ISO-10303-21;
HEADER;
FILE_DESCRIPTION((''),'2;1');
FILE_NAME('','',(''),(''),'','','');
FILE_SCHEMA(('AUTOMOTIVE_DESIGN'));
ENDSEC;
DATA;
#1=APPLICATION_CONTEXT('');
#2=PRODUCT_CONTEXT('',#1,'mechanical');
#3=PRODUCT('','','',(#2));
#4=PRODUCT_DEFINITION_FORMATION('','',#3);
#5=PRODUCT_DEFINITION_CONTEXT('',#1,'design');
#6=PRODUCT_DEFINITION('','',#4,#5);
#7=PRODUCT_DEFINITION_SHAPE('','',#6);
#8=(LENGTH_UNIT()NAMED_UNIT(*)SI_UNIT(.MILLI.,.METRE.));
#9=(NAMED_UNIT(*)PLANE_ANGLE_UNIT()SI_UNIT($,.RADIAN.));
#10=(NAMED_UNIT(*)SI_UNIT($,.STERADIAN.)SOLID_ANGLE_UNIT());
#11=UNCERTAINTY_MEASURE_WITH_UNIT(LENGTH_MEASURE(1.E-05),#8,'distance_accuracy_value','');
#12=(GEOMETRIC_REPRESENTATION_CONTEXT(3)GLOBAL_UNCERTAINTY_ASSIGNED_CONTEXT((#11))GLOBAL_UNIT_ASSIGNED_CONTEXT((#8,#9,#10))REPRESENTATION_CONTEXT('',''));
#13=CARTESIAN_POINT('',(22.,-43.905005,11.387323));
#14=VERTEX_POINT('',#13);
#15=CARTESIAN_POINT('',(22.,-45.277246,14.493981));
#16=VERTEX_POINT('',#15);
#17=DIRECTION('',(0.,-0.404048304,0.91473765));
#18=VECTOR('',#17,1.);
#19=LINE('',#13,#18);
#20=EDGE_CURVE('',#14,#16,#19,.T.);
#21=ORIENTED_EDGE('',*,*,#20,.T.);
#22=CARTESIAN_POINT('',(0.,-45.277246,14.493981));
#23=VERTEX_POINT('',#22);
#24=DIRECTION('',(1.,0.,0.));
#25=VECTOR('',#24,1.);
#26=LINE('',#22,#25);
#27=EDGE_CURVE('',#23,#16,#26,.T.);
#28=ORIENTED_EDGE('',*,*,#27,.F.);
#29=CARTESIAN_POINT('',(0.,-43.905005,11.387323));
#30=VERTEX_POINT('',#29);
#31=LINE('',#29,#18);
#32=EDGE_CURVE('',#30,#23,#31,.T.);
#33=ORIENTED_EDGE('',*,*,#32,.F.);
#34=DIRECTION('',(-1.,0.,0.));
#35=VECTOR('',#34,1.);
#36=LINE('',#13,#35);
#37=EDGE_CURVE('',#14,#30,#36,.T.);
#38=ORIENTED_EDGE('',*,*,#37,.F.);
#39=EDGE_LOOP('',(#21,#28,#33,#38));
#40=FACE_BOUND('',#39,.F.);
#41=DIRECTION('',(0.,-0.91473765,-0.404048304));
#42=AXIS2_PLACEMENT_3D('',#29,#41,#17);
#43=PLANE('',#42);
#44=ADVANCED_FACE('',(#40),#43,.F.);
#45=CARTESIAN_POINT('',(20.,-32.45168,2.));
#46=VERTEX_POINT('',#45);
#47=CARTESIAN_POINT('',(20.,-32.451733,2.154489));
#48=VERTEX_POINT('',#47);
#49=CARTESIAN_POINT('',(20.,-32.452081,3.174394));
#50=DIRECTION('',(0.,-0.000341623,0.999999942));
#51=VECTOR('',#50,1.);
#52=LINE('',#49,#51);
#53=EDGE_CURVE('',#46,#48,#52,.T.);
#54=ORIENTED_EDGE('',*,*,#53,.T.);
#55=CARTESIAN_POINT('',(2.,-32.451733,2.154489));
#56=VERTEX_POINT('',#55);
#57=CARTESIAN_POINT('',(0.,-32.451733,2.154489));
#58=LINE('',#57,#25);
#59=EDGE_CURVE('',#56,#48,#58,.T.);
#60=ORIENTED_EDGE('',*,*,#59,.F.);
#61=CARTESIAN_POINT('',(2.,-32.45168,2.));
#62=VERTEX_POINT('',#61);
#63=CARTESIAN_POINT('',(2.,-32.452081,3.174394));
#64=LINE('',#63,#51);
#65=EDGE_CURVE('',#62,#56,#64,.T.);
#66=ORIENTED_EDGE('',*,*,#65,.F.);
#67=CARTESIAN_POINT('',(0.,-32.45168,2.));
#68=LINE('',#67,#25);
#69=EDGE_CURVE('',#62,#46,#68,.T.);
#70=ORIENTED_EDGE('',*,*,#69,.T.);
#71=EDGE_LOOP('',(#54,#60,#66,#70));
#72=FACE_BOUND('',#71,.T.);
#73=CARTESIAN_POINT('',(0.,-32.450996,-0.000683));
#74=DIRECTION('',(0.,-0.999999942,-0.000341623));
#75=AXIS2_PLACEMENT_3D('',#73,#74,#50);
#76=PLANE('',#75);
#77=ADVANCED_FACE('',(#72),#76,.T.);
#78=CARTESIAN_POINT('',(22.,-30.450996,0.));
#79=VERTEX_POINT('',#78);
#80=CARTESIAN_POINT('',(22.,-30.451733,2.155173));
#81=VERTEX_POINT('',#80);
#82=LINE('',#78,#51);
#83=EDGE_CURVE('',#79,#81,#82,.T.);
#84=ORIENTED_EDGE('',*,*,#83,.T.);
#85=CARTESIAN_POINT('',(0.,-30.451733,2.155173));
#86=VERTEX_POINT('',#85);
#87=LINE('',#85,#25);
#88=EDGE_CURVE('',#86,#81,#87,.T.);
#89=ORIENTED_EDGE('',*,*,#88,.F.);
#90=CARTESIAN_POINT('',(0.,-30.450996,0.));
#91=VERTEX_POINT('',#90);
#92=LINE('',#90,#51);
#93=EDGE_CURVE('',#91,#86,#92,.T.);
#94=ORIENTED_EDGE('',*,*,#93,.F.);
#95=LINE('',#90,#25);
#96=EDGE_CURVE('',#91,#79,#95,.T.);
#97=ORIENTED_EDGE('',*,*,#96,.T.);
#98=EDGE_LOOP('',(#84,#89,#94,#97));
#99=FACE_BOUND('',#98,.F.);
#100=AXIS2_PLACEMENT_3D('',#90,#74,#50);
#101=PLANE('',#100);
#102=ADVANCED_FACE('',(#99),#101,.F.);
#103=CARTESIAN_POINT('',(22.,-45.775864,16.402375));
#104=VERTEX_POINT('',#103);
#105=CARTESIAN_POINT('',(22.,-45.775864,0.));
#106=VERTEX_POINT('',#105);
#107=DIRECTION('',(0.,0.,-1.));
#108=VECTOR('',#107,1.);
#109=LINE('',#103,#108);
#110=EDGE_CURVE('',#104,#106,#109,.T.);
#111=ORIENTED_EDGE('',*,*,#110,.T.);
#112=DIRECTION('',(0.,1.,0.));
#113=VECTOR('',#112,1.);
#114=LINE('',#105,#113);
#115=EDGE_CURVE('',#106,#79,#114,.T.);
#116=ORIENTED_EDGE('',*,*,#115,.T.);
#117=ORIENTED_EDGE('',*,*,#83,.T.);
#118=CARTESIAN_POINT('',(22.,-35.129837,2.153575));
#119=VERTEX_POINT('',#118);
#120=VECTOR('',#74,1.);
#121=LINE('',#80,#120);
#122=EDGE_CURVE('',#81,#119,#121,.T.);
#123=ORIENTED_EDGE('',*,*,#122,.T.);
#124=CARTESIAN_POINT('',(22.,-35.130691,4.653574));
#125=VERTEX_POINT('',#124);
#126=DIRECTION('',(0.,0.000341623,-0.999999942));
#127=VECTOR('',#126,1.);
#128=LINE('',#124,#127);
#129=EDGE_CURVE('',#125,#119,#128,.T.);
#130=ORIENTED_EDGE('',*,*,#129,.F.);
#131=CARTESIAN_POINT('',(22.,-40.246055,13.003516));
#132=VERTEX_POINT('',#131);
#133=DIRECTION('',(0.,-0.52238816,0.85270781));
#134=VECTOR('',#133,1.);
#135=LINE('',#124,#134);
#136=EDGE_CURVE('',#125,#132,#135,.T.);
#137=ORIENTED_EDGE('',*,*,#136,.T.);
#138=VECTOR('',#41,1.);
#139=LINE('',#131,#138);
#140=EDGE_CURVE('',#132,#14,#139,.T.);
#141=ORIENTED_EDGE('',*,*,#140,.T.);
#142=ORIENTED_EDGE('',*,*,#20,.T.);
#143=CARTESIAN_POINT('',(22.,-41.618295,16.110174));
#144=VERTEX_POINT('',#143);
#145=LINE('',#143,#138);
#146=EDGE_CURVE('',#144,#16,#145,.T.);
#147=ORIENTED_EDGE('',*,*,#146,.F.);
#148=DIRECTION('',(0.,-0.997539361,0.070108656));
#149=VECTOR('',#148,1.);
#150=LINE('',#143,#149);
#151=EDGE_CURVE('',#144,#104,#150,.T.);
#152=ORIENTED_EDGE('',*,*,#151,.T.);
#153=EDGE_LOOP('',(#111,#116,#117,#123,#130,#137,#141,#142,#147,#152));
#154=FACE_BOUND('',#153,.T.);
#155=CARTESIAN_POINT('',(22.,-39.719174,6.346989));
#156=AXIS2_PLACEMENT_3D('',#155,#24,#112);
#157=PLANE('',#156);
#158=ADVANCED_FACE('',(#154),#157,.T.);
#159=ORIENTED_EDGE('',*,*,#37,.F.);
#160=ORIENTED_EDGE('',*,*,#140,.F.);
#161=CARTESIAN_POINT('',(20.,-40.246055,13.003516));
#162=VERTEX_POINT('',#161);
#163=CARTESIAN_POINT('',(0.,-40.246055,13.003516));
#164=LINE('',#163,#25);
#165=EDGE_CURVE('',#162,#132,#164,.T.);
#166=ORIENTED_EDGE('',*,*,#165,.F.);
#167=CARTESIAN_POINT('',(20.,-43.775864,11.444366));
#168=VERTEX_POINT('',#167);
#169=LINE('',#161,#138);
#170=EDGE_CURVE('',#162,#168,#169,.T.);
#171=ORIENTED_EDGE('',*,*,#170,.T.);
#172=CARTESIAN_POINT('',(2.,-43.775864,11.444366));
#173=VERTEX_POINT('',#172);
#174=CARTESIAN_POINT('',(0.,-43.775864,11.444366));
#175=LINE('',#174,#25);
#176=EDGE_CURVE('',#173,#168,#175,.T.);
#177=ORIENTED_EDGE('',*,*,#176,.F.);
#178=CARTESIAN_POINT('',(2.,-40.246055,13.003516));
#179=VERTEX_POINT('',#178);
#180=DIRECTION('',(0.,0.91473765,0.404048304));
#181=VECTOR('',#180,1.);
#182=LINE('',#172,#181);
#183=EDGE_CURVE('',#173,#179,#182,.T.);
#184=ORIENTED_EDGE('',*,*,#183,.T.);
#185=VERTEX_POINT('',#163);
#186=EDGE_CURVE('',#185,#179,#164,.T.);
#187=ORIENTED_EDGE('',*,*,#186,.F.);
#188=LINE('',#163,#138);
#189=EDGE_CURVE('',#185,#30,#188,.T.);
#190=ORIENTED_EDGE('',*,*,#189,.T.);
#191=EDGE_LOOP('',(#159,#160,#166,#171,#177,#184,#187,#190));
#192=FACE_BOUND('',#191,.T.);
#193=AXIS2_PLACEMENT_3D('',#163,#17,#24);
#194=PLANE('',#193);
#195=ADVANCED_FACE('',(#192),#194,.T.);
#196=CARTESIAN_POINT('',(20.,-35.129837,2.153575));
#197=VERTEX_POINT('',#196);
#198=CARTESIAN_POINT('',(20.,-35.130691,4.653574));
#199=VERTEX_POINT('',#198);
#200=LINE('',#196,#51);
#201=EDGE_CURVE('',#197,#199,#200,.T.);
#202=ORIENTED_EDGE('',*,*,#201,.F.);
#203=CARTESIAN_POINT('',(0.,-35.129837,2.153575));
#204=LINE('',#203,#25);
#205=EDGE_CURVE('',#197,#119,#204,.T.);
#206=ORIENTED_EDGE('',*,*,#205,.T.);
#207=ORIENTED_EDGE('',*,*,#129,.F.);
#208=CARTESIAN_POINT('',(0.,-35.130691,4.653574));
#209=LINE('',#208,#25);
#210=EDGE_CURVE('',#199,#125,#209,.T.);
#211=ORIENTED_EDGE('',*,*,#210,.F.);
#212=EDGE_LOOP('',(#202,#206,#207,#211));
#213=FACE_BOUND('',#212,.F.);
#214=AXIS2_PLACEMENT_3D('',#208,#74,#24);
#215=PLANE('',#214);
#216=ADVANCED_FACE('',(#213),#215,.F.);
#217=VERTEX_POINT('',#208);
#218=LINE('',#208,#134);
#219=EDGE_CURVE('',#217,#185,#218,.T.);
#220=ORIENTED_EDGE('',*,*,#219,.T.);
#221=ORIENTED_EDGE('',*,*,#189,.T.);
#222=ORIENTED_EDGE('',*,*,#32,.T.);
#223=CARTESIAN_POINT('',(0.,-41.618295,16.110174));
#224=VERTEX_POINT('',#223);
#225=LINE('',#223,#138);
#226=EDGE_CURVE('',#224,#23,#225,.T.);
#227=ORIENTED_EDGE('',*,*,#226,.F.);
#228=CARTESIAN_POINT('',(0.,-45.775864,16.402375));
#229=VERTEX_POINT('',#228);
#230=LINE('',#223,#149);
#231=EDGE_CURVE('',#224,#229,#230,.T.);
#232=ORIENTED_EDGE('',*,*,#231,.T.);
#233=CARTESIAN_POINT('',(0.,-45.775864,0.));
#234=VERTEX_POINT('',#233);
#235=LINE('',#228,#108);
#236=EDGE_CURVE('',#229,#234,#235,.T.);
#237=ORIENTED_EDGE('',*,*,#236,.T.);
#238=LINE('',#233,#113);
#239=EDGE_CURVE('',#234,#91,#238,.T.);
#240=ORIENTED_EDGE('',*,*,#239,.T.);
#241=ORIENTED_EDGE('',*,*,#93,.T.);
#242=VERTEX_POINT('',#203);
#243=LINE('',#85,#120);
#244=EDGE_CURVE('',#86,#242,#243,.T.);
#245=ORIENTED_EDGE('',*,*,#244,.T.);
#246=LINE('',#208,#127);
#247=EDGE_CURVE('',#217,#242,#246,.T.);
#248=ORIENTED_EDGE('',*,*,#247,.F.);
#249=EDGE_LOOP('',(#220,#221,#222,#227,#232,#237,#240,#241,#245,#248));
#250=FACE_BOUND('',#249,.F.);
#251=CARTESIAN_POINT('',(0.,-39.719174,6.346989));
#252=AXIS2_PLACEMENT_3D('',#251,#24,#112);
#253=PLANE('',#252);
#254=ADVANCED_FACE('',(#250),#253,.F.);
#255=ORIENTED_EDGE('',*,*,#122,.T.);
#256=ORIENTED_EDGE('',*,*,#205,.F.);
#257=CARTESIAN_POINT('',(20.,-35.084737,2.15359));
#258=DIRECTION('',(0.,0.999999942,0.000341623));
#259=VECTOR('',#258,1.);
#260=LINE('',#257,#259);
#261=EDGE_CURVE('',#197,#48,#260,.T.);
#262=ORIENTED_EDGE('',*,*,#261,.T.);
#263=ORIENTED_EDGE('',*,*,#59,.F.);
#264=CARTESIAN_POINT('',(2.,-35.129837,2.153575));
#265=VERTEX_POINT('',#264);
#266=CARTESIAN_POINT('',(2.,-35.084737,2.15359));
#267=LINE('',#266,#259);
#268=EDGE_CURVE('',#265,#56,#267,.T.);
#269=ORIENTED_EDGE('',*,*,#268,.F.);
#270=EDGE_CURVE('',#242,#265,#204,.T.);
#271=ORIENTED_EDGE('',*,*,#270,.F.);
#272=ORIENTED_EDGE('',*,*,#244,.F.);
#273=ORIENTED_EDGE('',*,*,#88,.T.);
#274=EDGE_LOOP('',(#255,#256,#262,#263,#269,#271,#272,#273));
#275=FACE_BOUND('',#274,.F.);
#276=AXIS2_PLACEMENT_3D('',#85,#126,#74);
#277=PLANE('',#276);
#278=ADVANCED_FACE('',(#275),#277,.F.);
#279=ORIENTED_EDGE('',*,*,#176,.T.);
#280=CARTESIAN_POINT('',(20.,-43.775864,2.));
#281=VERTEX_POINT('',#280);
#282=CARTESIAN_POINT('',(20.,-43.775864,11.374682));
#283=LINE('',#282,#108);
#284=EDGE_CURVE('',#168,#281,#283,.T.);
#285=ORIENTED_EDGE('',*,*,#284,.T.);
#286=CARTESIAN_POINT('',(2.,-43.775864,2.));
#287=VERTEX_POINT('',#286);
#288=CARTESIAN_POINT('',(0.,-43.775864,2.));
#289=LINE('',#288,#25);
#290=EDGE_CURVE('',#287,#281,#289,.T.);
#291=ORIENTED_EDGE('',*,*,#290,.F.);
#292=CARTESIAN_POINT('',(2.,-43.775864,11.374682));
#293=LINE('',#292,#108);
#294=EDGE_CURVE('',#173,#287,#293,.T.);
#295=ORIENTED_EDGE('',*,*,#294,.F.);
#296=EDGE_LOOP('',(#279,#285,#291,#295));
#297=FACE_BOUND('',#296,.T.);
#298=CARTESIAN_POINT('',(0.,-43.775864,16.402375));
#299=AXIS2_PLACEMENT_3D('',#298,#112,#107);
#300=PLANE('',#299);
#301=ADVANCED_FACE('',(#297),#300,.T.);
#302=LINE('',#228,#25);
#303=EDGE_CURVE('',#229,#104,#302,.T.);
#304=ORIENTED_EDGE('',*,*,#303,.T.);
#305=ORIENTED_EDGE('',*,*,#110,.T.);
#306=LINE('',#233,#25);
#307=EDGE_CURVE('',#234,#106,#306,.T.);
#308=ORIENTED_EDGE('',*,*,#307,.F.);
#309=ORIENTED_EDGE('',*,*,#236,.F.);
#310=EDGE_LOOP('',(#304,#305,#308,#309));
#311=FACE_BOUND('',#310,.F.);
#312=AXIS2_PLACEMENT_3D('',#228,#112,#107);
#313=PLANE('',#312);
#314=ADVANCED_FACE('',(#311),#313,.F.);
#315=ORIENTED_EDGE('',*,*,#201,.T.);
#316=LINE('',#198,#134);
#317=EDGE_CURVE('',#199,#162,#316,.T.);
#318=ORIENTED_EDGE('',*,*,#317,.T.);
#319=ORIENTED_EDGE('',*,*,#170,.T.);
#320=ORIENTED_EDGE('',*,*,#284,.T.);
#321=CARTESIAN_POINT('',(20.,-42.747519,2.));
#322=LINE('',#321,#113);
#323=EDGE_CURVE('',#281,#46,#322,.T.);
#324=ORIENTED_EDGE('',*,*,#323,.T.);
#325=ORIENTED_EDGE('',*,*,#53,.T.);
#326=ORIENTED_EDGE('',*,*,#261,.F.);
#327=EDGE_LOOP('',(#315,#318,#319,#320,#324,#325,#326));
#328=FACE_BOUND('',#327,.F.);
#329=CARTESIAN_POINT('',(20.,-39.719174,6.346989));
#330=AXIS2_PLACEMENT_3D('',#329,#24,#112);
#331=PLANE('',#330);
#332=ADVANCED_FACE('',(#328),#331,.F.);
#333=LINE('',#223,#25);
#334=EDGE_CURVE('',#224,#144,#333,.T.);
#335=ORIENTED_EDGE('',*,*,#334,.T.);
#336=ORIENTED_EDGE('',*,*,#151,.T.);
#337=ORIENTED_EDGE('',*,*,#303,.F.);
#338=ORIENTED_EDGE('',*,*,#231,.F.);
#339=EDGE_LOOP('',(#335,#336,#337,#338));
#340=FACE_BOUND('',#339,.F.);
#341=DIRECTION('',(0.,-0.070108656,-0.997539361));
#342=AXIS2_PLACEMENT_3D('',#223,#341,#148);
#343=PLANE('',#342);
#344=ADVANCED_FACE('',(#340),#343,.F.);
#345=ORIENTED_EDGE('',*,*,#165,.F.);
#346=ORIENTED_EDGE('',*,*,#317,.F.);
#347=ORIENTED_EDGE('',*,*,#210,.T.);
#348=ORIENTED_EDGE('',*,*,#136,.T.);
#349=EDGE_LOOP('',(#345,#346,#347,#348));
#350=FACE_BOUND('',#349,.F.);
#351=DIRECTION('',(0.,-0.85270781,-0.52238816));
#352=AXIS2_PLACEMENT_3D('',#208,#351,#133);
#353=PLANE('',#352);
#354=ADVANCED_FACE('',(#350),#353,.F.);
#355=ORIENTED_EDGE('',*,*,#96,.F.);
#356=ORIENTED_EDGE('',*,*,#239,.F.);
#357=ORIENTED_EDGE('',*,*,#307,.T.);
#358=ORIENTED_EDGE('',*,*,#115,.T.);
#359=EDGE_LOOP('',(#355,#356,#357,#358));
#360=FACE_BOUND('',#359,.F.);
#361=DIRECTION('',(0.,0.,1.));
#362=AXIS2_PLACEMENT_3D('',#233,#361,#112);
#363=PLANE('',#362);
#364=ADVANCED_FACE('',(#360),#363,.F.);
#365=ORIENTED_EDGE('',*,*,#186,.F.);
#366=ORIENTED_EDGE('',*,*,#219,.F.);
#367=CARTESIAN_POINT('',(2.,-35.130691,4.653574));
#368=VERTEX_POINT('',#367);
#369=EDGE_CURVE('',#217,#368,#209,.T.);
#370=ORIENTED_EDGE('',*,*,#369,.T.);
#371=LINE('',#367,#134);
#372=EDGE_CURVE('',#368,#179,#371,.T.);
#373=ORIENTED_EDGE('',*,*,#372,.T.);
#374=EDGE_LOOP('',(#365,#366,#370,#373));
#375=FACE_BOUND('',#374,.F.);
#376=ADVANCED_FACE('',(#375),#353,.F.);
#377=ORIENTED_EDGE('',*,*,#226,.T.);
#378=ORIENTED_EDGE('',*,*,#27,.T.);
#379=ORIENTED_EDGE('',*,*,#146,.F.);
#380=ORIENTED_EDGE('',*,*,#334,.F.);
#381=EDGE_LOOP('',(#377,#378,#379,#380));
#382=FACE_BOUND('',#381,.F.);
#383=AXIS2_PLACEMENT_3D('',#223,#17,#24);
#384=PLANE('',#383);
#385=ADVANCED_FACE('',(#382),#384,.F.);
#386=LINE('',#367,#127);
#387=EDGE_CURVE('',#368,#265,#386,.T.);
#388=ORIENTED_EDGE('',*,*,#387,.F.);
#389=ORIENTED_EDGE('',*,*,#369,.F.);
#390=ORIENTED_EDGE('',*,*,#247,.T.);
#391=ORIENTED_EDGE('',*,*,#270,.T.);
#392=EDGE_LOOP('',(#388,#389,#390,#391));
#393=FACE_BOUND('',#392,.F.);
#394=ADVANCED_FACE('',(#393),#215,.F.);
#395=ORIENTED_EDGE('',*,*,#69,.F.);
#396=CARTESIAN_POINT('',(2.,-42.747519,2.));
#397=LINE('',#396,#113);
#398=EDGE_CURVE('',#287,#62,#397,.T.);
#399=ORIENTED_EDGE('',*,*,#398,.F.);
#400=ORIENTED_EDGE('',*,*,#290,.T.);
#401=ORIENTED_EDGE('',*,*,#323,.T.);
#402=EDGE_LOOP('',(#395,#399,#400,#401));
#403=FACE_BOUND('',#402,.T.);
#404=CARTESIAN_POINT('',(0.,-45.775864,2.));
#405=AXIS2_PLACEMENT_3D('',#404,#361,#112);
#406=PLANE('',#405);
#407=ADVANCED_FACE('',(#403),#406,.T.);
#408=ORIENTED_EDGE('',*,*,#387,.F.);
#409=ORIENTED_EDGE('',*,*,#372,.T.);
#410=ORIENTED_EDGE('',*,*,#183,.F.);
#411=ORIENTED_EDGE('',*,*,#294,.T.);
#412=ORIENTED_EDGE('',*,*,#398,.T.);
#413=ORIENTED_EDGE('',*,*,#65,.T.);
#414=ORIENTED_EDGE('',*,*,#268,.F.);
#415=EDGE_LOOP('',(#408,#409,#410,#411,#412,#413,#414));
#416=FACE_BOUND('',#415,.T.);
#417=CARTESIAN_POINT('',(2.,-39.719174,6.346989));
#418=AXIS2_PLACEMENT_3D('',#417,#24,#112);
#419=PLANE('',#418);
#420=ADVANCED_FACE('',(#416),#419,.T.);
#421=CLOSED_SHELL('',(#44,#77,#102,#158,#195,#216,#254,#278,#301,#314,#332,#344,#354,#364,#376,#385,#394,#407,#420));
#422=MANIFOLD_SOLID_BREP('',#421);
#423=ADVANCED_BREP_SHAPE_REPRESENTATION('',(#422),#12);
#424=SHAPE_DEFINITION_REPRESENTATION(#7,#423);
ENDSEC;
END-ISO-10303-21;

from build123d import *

# Parameters (mm, degrees)
F1_DEPTH = 22
F2_T     = 2
F3_DEPTH = 4
F4_DEPTH = 2.5


# Not quite as in the source:
# - a shell that OpenCascade refuses in one call is made with other operations: the cavity is built on its own and cut out
# - a feature names something its author has since deleted; it is built from what else it names


with BuildPart() as f1:
    # F0 (on Right) → F1 (new body)
    with BuildSketch(Plane.YZ):
        Polygon((-45.7758642733, 0), (-30.4509963948, 0), (-30.4525867105, 4.6551725827), (-35.1306907833, 4.6535744332), (-40.2460545301, 13.0035160109), (-41.6182950139, 16.1101743579), (-45.7758642733, 16.402374953), align=None)
    extrude(amount=F1_DEPTH)

    # F2: shell of thickness 2, made by hand


with BuildPart() as f2_core1:
    # F2_t2: copy of F1
    add(f1.part)

    # the walls: a layer under each face that stays
    f2_faces = [f2_core1.faces().sort_by_distance(p)[0] for p in [
        (11, -40.932174772, 14.5568451844),
        (11, -43.6970796436, 16.2562746555),
        (11, -45.7758642733, 8.2011874765),
        (11, -38.1134303341, 0),
        (11, -30.4517915527, 2.3275862914),
        (11, -32.7916387469, 4.6543735079),
        (0, -38.1134303341, 8.2011874765),
        (22, -38.1134303341, 8.2011874765),
    ]]
    thicken(f2_faces, amount=-F2_T, mode=Mode.SUBTRACT)


with BuildPart() as f1_1:
    add(f1.part)

    # what is left inside the walls is the cavity
    f2_cavity = [f2_core1.part.solids().sort_by_distance(p)[0] for p in [
        (14, -43.755864, 8.128439),
    ]]
    add(f2_cavity, mode=Mode.SUBTRACT)

    # F3 (cut): a face of the model
    f3_faces = [f1_1.faces().sort_by_distance(p)[0] for p in [
        (11, -40.932174772, 14.5568451844),
    ]]
    extrude(f3_faces, amount=-F3_DEPTH, mode=Mode.SUBTRACT)

    # F4 (cut): a face of the model
    f4_faces = [f1_1.faces().sort_by_distance(p)[0] for p in [
        (11, -32.7916387469, 4.6543735079),
    ]]
    extrude(f4_faces, amount=-F4_DEPTH, mode=Mode.SUBTRACT)


solid = f1_1.part
